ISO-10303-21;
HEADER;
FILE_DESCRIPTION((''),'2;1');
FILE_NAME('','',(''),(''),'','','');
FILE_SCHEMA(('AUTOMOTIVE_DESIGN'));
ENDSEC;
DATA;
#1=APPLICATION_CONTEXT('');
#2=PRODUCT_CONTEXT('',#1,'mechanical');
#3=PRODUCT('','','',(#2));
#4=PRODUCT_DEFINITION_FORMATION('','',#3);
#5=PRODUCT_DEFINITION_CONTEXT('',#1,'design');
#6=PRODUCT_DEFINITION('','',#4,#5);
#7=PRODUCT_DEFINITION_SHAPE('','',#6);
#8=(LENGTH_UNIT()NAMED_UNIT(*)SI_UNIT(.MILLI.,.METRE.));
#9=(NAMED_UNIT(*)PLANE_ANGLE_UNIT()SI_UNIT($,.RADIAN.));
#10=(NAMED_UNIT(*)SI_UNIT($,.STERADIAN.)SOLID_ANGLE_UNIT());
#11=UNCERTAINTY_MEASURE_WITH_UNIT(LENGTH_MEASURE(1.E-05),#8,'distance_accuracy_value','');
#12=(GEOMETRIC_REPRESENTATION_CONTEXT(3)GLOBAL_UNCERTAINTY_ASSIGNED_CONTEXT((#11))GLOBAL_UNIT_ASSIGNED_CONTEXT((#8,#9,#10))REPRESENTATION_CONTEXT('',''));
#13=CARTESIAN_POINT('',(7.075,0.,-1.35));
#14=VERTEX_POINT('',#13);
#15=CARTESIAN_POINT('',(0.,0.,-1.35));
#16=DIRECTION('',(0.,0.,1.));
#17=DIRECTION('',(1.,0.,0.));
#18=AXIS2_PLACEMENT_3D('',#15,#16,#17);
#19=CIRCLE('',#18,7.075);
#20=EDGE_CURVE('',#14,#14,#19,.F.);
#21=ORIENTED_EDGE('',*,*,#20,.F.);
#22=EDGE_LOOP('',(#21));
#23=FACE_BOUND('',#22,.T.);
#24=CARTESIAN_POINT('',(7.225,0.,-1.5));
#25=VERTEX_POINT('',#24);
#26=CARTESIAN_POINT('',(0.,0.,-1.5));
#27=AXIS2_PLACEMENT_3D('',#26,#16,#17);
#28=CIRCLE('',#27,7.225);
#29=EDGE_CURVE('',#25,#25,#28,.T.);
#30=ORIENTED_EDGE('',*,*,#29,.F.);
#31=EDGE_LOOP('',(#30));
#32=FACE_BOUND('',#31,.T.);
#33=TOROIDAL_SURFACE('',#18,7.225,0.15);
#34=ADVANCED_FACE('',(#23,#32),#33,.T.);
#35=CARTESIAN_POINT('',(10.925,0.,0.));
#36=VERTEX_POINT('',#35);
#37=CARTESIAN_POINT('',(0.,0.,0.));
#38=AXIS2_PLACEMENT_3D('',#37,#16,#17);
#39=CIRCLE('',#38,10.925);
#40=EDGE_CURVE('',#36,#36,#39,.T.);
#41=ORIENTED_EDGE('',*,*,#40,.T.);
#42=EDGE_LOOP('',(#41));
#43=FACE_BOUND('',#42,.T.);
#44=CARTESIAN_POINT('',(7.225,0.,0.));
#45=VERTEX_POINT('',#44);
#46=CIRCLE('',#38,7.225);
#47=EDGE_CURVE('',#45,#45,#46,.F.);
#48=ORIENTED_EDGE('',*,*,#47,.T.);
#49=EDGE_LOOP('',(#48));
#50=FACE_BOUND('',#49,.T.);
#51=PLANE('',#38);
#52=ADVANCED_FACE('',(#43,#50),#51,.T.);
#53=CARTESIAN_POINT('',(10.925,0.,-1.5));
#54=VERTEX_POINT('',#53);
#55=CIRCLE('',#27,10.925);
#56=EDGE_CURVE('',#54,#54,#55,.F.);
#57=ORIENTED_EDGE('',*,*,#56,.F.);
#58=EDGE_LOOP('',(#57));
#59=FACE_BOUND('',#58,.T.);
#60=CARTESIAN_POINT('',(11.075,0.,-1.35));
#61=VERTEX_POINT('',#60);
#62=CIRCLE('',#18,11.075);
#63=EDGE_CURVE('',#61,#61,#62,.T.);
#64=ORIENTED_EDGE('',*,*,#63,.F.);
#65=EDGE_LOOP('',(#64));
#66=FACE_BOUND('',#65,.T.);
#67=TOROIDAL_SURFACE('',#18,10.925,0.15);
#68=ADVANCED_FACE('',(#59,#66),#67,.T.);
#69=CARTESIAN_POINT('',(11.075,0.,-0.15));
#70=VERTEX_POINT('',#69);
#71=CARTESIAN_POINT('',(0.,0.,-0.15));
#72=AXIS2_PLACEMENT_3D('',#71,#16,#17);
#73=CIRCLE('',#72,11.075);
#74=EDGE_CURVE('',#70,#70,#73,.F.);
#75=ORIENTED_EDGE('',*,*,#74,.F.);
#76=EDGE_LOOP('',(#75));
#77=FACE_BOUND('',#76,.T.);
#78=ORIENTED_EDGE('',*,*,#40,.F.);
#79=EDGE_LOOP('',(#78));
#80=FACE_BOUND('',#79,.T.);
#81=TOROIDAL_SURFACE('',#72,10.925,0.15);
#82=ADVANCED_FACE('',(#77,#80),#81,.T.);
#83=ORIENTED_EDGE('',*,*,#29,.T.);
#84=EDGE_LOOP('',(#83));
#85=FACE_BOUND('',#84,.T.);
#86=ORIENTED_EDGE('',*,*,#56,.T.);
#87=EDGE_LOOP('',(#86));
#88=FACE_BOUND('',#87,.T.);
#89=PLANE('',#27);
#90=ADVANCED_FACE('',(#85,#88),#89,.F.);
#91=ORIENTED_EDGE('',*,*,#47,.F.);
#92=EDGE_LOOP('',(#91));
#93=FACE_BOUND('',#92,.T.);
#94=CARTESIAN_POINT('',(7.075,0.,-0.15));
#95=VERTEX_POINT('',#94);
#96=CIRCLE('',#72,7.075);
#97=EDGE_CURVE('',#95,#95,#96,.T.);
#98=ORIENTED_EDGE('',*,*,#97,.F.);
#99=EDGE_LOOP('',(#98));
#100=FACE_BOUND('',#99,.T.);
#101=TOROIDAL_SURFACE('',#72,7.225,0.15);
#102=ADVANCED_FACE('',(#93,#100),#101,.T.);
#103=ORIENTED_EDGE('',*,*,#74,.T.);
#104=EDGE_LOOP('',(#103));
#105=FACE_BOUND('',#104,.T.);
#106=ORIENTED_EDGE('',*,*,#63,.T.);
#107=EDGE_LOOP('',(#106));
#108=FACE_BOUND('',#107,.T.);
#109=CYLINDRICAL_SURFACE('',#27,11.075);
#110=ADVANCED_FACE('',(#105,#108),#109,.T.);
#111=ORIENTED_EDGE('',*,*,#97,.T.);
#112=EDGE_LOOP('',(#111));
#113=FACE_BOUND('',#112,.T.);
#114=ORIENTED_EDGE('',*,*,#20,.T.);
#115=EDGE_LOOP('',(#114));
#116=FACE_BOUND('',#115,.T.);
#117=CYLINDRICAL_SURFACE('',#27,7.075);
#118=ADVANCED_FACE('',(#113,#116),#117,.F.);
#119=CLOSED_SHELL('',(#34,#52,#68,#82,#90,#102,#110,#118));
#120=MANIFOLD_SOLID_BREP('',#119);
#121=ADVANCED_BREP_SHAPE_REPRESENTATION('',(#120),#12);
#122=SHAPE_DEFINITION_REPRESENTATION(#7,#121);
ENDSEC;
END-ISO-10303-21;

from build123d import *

# Parameters (mm, degrees)
SKETCH1_R          = 11.075
SKETCH1_R_2        = 7.075
BASE_FLANGE1_DEPTH = 1.5
FILLET1_R          = 0.15


# Sheet-metal steps are written as plain solids
with BuildPart() as part:
    # Sketch1 → Base-Flange1 (new body)
    with BuildSketch(Plane.XY):
        Circle(SKETCH1_R)
        Circle(SKETCH1_R_2, mode=Mode.SUBTRACT)
    extrude(amount=-BASE_FLANGE1_DEPTH)

    # Fillet1
    fillet1_edges = [part.edges().sort_by_distance(p)[0] for p in [
        (-11.075, 0, 0),
        (-11.075, 0, -1.5),
        (-7.075, 0, -1.5),
        (-7.075, 0, 0),
    ]]
    fillet(fillet1_edges, radius=FILLET1_R)


solid = part.part
